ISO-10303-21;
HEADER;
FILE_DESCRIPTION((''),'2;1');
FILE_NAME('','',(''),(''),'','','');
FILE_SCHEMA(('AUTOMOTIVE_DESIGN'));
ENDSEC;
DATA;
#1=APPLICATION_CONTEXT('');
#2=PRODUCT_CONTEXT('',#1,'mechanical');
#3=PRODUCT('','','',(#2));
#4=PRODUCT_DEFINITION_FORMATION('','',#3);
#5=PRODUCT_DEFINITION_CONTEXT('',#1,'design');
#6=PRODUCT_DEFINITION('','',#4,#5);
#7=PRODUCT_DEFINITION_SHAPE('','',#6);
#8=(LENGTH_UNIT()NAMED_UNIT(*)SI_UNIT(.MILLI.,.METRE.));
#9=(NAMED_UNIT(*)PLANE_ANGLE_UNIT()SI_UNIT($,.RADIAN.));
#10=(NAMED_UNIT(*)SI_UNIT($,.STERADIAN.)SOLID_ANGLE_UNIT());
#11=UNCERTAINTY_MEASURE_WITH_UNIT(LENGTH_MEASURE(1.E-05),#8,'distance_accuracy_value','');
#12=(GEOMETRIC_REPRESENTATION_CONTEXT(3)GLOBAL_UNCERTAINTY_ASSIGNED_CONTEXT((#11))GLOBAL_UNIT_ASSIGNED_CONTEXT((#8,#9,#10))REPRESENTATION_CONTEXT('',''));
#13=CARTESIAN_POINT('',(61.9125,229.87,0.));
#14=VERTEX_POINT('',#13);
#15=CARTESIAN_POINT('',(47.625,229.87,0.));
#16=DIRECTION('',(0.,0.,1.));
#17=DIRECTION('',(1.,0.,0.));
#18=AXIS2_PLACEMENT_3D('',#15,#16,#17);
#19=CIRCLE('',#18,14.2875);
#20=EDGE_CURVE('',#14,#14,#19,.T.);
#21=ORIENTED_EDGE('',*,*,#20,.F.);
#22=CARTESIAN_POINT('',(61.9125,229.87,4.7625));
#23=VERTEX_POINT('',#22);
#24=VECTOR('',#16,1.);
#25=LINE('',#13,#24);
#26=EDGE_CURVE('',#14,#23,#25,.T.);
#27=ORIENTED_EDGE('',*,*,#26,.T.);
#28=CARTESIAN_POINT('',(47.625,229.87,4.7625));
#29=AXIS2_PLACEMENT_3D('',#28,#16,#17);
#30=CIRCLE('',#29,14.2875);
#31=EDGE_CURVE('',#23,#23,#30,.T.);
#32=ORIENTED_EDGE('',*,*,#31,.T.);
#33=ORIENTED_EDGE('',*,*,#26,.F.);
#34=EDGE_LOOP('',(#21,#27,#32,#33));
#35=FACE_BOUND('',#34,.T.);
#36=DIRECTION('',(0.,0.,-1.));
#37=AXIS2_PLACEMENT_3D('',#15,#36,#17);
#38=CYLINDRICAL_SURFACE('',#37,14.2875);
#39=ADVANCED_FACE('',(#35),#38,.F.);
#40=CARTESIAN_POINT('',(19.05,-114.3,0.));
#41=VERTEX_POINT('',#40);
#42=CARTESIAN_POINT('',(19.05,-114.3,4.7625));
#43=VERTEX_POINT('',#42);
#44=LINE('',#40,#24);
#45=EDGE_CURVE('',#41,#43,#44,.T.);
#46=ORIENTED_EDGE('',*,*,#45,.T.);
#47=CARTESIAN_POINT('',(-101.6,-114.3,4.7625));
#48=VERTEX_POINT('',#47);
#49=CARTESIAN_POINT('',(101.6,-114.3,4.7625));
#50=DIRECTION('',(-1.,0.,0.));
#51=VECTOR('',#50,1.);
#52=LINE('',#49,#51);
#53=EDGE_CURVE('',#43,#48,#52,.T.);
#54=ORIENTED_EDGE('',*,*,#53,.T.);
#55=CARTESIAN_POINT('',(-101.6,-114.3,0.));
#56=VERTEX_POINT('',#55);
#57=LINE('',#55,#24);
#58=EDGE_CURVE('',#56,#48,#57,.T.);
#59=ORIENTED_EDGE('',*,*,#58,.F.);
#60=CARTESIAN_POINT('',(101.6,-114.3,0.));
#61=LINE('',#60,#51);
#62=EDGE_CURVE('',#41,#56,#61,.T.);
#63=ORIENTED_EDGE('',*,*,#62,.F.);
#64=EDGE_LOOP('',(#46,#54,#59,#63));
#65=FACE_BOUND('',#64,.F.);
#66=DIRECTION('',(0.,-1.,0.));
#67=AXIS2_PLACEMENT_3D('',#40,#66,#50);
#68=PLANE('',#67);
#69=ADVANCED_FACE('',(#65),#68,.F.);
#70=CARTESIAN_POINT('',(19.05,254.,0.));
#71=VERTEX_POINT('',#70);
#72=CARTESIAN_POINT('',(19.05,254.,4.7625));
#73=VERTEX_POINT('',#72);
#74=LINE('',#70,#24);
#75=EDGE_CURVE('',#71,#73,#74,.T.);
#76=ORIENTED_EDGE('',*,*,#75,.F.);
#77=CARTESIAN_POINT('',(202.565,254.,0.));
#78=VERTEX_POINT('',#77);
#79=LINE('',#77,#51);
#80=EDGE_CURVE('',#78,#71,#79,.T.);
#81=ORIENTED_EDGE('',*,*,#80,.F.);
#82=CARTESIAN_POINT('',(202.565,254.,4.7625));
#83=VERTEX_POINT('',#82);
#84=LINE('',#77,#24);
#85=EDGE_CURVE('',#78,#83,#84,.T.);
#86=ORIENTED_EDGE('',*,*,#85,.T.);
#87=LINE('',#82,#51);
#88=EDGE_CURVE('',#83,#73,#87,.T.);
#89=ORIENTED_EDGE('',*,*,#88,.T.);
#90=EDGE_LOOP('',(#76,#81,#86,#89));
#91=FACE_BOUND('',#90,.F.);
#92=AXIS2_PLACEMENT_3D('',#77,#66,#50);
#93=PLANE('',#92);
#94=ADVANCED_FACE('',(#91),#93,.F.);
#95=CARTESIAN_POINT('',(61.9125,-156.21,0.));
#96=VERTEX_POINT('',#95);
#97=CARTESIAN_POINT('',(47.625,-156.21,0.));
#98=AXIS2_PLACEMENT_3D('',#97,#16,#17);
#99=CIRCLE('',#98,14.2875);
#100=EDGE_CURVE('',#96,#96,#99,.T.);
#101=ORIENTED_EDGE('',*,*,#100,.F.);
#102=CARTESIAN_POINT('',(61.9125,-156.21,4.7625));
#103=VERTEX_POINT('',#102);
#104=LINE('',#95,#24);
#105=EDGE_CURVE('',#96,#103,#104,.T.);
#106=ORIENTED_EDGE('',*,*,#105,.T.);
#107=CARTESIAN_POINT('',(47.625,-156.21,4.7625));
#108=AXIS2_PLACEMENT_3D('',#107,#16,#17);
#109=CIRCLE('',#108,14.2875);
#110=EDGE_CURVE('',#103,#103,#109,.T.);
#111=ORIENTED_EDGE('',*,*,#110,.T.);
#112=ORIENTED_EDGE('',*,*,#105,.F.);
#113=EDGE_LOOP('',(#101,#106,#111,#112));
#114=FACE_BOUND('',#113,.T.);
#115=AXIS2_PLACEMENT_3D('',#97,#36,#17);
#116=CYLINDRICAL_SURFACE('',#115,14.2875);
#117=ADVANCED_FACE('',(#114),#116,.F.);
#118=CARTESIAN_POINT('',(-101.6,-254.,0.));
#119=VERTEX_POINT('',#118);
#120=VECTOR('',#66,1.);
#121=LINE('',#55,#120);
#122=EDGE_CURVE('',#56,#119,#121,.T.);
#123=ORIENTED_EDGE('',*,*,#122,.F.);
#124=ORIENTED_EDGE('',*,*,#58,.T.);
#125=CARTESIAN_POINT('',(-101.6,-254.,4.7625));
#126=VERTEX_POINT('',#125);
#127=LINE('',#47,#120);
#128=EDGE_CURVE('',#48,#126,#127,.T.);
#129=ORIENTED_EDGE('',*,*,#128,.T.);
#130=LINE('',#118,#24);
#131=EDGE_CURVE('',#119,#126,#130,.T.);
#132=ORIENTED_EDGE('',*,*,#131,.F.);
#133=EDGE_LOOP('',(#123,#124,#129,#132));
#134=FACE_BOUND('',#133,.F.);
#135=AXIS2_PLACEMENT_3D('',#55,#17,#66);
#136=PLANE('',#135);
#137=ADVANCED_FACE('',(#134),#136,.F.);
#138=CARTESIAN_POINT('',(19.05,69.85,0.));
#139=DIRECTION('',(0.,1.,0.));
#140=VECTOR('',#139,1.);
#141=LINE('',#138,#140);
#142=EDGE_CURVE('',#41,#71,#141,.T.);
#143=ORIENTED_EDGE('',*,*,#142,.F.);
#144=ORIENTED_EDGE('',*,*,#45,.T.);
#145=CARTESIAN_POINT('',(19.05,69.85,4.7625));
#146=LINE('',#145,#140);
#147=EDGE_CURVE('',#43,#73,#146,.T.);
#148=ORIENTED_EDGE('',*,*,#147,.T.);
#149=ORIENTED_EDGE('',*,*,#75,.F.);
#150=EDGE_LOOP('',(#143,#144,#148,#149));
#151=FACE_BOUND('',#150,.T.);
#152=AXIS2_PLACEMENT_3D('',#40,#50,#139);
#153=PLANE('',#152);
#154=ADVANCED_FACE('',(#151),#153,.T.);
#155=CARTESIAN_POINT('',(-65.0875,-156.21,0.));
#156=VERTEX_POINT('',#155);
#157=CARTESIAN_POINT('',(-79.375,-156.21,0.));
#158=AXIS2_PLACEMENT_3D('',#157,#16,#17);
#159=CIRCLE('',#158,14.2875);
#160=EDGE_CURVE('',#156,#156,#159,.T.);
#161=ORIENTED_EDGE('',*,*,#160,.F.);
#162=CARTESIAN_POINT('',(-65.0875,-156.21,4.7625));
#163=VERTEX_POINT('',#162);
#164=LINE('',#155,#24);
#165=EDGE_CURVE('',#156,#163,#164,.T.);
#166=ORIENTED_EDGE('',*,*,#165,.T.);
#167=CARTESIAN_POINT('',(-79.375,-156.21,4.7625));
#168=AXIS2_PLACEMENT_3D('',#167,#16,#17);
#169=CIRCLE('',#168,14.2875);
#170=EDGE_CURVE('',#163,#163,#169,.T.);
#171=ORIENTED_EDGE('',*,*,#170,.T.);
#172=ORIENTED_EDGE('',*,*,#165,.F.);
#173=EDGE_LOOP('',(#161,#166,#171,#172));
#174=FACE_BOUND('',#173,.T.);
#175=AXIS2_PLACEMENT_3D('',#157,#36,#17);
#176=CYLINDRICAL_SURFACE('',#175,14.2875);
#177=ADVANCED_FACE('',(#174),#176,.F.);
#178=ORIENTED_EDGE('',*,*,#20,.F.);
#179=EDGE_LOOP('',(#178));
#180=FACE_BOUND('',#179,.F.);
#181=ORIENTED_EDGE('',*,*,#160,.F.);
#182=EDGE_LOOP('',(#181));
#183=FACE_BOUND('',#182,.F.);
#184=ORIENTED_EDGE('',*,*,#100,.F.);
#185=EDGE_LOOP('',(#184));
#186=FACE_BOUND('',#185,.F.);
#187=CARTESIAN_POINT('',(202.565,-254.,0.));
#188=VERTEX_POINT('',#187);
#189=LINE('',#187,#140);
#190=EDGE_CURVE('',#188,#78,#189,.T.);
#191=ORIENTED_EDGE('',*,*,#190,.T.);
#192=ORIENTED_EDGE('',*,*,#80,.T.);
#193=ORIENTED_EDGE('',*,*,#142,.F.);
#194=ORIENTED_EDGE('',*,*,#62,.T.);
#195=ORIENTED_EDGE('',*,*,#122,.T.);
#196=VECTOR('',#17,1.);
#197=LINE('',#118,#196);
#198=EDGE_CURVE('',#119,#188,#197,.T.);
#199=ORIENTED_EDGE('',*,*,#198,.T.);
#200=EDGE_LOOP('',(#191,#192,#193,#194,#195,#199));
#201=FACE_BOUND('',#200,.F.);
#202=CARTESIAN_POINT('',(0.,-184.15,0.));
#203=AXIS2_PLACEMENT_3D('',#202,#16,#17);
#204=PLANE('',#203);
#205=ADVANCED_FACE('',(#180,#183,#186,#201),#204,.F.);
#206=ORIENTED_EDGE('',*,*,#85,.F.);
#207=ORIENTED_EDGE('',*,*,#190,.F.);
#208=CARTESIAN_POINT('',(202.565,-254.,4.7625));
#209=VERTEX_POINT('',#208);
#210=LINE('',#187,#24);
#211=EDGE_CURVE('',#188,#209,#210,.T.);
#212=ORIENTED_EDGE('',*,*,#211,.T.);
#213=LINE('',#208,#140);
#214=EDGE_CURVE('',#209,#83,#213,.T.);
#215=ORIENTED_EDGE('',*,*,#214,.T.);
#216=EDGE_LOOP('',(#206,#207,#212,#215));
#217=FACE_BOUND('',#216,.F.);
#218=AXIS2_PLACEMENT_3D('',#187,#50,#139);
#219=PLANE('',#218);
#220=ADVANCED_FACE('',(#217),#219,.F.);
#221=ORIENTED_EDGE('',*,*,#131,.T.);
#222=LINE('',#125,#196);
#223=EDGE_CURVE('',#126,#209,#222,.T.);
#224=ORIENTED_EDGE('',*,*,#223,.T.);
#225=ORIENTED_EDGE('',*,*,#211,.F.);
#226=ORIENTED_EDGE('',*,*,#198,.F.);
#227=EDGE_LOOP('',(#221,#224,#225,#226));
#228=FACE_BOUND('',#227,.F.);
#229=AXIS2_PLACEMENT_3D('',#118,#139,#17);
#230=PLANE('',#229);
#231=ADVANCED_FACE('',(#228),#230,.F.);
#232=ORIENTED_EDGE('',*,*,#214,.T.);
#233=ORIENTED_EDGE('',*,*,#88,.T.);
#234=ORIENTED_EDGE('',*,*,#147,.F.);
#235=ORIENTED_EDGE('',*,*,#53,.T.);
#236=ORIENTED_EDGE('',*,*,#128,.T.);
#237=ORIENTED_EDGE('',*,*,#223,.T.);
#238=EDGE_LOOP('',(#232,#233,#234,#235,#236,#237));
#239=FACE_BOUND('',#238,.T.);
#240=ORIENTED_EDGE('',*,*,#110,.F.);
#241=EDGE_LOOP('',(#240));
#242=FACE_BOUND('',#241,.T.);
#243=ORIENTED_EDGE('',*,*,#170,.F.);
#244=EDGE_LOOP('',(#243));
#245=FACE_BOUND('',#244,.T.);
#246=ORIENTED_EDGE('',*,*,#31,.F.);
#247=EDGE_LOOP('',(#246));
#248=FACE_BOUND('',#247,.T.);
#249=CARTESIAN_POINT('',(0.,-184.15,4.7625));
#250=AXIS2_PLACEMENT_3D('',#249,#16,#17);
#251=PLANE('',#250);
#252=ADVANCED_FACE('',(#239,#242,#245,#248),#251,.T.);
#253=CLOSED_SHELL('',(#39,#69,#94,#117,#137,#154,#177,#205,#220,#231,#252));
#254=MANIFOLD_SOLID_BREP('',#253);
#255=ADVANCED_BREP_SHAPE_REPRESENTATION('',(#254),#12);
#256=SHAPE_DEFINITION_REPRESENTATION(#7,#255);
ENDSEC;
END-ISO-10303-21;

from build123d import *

# Parameters (mm, degrees)
F0_R     = 14.2875
F0_W     = 82.55
F0_H     = 368.3
F1_DEPTH = 4.7625


# Not quite as in the source:
# - a feature names something its author has since deleted; it is built from what else it names


with BuildPart() as f1:
    # F0 (on Top) → F1 (new body)
    with BuildSketch(Plane.XY):
        Polygon((19.05, -114.3), (-101.6, -114.3), (-101.6, -254), (101.6, -254), (101.6, -114.3), align=None)
        with Locations((-79.375, -156.21)):
            Circle(F0_R, mode=Mode.SUBTRACT)
        with Locations((47.625, -156.21)):
            Circle(F0_R, mode=Mode.SUBTRACT)
        Polygon((202.565, 254), (101.6, 254), (101.6, -114.3), (101.6, -254), (202.565, -254), align=None)
        with Locations((60.325, 69.85)):
            Rectangle(F0_W, F0_H)
        with Locations((47.625, 229.87)):
            Circle(F0_R, mode=Mode.SUBTRACT)
    extrude(amount=F1_DEPTH)


solid = f1.part
